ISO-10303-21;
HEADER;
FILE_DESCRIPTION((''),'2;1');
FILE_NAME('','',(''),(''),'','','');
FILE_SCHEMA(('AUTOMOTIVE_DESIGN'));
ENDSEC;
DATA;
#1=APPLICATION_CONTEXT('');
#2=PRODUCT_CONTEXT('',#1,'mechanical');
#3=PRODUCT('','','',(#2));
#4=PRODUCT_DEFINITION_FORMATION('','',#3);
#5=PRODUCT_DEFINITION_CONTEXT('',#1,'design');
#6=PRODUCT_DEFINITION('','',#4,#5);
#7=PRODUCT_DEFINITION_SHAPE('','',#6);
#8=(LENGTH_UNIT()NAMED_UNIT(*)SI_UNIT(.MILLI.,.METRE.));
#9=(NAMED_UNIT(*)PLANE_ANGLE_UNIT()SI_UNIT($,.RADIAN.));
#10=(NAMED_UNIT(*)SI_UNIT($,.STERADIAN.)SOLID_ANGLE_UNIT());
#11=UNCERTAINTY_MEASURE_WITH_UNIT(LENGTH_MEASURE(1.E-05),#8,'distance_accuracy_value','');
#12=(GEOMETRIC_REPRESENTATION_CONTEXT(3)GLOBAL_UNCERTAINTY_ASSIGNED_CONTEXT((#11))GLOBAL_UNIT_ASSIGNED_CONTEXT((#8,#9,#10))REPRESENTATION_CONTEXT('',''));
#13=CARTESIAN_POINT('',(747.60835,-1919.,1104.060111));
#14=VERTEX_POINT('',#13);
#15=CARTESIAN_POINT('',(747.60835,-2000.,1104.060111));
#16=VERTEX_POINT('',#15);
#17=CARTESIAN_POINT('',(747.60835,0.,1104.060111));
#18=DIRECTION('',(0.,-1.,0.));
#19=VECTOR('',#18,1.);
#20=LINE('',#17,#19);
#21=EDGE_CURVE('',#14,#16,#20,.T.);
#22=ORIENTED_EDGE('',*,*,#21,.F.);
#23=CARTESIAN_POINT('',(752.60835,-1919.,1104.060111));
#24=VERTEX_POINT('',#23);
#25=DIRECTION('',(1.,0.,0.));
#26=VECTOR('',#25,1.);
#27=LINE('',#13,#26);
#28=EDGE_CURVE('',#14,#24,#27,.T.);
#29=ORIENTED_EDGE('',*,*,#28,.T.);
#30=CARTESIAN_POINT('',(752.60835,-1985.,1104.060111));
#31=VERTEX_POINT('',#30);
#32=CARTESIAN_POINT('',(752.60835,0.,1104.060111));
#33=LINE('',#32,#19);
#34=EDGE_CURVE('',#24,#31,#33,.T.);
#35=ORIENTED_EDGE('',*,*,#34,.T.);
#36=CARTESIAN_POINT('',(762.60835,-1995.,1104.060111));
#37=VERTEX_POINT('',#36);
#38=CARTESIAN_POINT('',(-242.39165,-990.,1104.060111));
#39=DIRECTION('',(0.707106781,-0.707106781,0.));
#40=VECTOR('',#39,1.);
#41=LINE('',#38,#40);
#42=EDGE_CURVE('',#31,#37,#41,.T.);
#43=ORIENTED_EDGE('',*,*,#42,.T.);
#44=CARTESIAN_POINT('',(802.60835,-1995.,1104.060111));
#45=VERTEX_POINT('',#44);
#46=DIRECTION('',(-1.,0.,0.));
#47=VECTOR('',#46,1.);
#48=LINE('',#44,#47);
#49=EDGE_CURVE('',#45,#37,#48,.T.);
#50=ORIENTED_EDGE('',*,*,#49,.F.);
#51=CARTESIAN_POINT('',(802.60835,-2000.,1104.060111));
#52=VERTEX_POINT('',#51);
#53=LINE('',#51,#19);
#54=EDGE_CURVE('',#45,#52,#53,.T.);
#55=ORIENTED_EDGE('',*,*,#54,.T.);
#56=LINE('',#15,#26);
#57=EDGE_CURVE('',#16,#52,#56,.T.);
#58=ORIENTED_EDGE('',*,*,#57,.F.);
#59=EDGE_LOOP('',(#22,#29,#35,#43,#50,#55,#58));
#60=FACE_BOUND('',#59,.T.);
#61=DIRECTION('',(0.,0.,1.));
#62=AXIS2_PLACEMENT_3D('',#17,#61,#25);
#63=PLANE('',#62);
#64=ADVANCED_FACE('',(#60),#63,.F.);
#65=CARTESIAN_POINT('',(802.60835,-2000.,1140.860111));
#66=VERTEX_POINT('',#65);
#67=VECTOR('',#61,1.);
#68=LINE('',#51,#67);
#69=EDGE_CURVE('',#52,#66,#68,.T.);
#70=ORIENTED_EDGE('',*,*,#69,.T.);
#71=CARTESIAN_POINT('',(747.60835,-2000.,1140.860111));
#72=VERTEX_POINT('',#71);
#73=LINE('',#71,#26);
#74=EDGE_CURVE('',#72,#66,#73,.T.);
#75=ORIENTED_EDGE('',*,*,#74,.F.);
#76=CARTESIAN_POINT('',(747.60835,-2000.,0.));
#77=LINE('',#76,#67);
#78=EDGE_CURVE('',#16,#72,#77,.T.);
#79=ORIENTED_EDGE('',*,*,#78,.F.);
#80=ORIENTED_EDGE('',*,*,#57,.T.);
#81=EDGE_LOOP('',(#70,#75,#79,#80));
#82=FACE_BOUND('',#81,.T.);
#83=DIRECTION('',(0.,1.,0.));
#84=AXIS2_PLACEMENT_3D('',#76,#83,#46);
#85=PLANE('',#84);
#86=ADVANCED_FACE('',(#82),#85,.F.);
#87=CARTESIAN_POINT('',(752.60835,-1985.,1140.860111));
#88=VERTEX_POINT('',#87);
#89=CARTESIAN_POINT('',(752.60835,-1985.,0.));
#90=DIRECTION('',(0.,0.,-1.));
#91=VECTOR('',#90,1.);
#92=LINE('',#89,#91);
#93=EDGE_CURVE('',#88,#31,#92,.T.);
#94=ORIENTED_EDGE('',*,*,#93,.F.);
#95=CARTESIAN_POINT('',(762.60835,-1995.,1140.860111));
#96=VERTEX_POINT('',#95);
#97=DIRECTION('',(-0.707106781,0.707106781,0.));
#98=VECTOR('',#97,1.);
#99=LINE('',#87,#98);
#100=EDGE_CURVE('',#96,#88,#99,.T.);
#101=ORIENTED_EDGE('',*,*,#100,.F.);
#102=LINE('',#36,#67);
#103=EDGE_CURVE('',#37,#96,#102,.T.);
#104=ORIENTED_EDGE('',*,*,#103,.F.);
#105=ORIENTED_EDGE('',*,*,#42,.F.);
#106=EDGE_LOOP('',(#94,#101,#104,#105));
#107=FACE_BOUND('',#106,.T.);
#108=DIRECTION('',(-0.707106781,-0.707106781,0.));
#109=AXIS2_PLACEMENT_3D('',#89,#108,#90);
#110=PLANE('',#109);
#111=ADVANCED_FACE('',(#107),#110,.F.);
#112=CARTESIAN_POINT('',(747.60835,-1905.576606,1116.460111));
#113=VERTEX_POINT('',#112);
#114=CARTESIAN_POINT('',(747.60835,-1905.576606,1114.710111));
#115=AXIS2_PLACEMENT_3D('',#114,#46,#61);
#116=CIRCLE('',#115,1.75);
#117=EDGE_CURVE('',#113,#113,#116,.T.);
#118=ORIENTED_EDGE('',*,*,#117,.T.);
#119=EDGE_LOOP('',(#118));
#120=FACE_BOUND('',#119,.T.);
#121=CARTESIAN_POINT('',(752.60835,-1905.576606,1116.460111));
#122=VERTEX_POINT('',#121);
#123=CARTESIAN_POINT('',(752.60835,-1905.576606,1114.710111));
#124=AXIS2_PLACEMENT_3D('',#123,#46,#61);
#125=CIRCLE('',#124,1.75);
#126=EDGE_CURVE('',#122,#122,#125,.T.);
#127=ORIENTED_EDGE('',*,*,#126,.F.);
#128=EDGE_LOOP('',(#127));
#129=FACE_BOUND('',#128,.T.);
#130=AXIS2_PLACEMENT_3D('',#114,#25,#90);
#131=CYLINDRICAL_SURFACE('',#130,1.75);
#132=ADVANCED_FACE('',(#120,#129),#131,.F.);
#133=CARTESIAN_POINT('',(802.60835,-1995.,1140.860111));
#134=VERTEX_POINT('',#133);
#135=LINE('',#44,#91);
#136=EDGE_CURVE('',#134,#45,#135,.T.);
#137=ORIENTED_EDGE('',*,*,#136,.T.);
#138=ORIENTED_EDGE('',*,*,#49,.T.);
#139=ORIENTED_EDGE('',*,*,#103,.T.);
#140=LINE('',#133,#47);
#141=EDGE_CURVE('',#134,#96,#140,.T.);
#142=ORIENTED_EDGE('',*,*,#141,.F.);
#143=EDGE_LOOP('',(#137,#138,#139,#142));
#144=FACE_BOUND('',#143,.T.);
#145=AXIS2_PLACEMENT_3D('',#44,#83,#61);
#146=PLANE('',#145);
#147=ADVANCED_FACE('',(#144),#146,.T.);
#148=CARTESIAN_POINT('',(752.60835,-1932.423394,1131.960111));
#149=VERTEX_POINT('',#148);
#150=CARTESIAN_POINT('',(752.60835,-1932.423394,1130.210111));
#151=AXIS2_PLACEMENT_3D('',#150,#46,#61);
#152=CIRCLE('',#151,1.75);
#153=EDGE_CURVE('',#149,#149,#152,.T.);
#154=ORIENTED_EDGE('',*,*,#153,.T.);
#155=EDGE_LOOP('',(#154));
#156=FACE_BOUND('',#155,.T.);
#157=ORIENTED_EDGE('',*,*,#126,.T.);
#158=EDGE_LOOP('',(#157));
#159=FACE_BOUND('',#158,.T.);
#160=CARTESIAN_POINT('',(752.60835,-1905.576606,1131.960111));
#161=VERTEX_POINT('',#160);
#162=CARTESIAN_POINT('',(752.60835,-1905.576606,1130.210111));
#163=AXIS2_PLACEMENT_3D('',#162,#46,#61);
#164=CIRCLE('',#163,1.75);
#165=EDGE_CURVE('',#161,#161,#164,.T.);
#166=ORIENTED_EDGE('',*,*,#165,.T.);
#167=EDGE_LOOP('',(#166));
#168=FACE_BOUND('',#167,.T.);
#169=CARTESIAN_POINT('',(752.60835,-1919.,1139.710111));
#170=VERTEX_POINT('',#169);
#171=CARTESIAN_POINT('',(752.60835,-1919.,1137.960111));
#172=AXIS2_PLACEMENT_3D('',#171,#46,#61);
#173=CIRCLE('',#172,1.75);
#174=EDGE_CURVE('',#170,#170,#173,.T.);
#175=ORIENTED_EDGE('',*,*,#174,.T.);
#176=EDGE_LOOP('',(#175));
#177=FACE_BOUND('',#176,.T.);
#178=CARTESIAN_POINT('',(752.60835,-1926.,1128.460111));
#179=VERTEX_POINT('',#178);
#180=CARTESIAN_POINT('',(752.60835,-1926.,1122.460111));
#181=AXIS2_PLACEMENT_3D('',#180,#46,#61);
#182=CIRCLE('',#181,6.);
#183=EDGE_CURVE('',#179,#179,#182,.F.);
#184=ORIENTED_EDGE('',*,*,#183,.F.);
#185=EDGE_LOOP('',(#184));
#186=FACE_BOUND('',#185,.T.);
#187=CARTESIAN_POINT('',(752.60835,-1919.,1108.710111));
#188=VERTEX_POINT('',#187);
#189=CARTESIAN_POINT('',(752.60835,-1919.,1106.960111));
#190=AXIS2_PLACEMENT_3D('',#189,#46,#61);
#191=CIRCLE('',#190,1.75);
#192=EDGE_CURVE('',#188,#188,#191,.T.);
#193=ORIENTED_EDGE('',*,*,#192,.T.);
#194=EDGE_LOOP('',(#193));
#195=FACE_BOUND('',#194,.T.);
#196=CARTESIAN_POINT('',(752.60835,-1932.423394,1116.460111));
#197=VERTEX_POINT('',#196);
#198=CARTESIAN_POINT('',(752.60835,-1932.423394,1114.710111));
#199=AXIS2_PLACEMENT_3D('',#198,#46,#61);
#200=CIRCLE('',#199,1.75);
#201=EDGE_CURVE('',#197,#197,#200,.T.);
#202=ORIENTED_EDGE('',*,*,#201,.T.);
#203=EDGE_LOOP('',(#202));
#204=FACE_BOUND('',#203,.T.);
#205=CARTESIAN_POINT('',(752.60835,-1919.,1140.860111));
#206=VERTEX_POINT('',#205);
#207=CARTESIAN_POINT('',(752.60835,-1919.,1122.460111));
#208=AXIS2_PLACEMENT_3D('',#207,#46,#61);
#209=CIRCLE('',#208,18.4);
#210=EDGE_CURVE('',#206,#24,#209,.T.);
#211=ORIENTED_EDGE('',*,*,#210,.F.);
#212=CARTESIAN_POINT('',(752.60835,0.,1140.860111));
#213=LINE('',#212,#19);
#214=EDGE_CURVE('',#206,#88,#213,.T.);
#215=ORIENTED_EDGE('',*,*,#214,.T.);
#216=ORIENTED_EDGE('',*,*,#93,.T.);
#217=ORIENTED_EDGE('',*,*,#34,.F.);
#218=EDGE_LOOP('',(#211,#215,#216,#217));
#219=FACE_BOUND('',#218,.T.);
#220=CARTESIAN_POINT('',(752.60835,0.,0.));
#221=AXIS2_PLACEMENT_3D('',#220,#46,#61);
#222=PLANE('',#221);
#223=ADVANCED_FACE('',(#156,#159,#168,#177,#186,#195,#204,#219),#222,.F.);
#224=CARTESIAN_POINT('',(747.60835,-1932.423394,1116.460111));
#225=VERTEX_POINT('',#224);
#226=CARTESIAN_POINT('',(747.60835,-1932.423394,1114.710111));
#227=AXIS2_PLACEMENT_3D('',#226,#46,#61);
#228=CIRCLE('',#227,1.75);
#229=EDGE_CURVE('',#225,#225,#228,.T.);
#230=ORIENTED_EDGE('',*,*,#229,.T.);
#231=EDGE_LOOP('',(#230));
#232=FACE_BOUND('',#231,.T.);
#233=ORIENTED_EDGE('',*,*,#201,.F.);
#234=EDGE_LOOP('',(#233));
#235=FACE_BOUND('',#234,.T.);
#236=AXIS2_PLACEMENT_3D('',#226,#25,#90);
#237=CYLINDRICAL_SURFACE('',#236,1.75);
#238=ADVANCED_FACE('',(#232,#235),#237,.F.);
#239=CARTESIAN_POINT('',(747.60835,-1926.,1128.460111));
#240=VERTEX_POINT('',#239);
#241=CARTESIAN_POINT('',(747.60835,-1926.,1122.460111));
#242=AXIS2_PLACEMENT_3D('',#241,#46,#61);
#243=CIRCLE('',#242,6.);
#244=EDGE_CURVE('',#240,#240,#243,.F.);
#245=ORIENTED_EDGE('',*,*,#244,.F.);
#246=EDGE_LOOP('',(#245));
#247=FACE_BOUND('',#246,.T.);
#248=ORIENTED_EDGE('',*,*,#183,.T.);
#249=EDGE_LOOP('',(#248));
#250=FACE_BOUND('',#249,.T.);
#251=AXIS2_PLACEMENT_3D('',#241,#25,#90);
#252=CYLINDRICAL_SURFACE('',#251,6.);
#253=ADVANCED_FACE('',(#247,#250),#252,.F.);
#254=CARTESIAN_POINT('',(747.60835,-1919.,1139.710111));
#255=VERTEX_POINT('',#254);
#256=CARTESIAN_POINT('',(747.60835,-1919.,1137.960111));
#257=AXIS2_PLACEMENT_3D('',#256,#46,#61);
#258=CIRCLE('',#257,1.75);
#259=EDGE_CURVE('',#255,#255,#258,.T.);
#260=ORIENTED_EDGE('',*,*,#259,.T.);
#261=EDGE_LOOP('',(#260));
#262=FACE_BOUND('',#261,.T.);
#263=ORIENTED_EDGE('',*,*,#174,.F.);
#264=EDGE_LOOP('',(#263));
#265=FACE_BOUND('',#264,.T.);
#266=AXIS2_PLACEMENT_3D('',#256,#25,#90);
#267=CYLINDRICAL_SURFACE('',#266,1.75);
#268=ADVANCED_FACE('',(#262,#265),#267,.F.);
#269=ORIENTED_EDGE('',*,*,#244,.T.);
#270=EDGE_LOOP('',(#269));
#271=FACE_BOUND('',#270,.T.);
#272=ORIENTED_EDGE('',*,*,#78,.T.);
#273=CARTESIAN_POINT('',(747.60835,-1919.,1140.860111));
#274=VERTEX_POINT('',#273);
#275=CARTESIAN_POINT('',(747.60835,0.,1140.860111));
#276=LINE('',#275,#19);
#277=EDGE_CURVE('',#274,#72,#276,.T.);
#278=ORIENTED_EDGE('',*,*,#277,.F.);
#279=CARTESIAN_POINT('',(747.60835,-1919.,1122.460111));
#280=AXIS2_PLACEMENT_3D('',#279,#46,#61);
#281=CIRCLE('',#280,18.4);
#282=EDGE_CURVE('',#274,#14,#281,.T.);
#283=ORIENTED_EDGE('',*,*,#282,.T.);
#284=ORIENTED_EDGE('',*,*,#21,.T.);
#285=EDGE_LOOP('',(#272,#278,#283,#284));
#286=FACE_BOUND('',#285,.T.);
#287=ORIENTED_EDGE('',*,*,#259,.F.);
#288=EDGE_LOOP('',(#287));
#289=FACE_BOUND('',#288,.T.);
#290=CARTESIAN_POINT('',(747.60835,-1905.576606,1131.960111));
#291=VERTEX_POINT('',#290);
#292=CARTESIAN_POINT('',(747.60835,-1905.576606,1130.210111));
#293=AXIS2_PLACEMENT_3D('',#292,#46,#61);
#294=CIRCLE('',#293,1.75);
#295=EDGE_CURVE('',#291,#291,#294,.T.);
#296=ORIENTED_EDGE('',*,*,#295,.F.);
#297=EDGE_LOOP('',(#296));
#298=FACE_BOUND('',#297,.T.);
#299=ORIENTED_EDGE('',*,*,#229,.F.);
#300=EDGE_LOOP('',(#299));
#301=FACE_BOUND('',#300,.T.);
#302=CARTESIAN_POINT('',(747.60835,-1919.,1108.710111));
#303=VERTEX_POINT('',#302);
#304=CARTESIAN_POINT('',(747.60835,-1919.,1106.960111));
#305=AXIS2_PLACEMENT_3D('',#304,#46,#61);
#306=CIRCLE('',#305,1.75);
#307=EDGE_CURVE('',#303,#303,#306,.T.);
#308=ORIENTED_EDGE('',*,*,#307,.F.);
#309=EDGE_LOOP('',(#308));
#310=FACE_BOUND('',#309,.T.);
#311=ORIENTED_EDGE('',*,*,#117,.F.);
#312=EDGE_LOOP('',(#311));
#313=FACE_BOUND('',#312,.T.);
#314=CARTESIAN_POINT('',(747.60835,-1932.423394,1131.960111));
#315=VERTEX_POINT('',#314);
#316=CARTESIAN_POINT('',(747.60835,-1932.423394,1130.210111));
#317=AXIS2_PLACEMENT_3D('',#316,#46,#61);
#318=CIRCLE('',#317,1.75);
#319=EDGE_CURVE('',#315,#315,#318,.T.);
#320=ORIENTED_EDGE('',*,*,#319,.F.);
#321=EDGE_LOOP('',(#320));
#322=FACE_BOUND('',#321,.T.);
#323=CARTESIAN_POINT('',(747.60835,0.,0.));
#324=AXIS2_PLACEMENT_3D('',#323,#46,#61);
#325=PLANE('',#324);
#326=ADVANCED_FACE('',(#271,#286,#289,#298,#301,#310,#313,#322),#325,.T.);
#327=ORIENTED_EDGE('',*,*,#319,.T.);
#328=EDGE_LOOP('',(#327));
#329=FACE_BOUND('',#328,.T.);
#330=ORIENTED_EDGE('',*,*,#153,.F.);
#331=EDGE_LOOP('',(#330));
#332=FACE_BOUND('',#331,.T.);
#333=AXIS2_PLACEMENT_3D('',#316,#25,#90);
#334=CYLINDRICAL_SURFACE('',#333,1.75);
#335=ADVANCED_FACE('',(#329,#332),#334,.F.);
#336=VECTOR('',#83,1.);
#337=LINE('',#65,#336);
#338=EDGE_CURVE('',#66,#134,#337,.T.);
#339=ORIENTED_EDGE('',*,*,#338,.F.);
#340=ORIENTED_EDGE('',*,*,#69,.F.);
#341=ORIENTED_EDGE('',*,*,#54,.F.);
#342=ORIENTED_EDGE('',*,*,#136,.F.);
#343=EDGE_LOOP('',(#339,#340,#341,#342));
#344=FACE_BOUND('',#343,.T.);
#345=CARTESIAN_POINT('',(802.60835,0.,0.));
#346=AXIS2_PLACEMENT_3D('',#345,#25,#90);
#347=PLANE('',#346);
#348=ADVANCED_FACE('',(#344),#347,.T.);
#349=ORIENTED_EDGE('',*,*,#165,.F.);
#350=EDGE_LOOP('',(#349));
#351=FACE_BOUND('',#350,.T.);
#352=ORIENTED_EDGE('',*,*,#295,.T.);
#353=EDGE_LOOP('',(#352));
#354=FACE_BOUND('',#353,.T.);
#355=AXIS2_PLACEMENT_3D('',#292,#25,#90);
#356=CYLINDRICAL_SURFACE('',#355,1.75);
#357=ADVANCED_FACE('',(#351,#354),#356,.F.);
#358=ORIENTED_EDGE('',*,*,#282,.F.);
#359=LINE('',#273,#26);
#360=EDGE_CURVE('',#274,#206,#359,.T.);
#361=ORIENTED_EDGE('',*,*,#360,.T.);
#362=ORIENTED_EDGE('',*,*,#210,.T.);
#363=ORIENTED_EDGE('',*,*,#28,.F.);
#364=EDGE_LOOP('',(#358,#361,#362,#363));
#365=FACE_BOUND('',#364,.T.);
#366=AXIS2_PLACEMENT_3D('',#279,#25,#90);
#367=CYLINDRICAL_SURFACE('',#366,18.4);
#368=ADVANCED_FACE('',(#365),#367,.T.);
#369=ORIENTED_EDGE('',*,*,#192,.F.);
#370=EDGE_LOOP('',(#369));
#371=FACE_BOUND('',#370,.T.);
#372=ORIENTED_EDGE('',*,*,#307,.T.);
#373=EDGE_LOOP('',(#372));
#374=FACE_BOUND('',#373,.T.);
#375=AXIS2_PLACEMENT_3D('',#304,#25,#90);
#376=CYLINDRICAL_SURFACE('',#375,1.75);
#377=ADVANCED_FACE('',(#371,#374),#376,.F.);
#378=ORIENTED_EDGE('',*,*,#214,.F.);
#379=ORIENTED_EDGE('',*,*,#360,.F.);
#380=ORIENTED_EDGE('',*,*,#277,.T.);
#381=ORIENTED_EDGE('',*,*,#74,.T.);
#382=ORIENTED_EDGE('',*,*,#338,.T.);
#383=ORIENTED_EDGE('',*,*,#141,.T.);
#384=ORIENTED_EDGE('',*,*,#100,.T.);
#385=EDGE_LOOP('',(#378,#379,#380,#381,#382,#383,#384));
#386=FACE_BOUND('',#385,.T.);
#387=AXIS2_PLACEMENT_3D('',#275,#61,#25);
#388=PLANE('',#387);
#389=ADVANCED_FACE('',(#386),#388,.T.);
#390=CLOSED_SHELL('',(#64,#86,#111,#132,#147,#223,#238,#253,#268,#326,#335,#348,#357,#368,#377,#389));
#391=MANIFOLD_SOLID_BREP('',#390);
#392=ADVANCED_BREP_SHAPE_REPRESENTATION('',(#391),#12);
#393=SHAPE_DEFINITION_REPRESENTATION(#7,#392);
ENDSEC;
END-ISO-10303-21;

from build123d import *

# Parameters (mm, degrees)
SZKIC1_R                    = 1.75
SZKIC1_R_2                  = 6
DODANIE_WYCI_GNI_CIE1_DEPTH = 5
SZKIC2_W                    = 36.8
SZKIC2_H                    = 5
DODANIE_WYCI_GNI_CIE2_DEPTH = 50
SFAZOWANIE1_SIZE            = 10


with BuildPart() as part:
    # Szkic1 → Dodanie-wyciągnięcie1 (new body)
    with BuildSketch(Plane.ZY.offset(-752.608350006)):
        with BuildLine():
            Line((1140.860111381, -2000), (1140.860111381, -1919))
            ThreePointArc((1140.860111381, -1919), (1122.460111381, -1900.6), (1104.060111381, -1919))
            Line((1104.060111381, -1919), (1104.060111381, -2000))
            Line((1104.060111381, -2000), (1140.860111381, -2000))
        make_face()
        with Locations((1114.710111381, -1932.423393759)):
            Circle(SZKIC1_R, mode=Mode.SUBTRACT)
        with Locations((1122.460111381, -1926)):
            Circle(SZKIC1_R_2, mode=Mode.SUBTRACT)
        with Locations((1106.960111381, -1919)):
            Circle(SZKIC1_R, mode=Mode.SUBTRACT)
        with Locations((1114.710111381, -1905.576606241)):
            Circle(SZKIC1_R, mode=Mode.SUBTRACT)
        with Locations((1130.210111381, -1932.423393759)):
            Circle(SZKIC1_R, mode=Mode.SUBTRACT)
        with Locations((1130.210111381, -1905.576606241)):
            Circle(SZKIC1_R, mode=Mode.SUBTRACT)
        with Locations((1137.960111381, -1919)):
            Circle(SZKIC1_R, mode=Mode.SUBTRACT)
    extrude(amount=DODANIE_WYCI_GNI_CIE1_DEPTH)

    # Szkic2 → Dodanie-wyciągnięcie2 (add)
    with BuildSketch(Plane.ZY.offset(-752.608350006)):
        with Locations((1122.460111381, -1997.5)):
            Rectangle(SZKIC2_W, SZKIC2_H)
    extrude(amount=-DODANIE_WYCI_GNI_CIE2_DEPTH)

    # Sfazowanie1
    sfazowanie1_edges = [part.edges().sort_by_distance(p)[0] for p in [
        (752.608350006, -1995, 1122.460111381),
    ]]
    chamfer(sfazowanie1_edges, length=SFAZOWANIE1_SIZE)


solid = part.part
